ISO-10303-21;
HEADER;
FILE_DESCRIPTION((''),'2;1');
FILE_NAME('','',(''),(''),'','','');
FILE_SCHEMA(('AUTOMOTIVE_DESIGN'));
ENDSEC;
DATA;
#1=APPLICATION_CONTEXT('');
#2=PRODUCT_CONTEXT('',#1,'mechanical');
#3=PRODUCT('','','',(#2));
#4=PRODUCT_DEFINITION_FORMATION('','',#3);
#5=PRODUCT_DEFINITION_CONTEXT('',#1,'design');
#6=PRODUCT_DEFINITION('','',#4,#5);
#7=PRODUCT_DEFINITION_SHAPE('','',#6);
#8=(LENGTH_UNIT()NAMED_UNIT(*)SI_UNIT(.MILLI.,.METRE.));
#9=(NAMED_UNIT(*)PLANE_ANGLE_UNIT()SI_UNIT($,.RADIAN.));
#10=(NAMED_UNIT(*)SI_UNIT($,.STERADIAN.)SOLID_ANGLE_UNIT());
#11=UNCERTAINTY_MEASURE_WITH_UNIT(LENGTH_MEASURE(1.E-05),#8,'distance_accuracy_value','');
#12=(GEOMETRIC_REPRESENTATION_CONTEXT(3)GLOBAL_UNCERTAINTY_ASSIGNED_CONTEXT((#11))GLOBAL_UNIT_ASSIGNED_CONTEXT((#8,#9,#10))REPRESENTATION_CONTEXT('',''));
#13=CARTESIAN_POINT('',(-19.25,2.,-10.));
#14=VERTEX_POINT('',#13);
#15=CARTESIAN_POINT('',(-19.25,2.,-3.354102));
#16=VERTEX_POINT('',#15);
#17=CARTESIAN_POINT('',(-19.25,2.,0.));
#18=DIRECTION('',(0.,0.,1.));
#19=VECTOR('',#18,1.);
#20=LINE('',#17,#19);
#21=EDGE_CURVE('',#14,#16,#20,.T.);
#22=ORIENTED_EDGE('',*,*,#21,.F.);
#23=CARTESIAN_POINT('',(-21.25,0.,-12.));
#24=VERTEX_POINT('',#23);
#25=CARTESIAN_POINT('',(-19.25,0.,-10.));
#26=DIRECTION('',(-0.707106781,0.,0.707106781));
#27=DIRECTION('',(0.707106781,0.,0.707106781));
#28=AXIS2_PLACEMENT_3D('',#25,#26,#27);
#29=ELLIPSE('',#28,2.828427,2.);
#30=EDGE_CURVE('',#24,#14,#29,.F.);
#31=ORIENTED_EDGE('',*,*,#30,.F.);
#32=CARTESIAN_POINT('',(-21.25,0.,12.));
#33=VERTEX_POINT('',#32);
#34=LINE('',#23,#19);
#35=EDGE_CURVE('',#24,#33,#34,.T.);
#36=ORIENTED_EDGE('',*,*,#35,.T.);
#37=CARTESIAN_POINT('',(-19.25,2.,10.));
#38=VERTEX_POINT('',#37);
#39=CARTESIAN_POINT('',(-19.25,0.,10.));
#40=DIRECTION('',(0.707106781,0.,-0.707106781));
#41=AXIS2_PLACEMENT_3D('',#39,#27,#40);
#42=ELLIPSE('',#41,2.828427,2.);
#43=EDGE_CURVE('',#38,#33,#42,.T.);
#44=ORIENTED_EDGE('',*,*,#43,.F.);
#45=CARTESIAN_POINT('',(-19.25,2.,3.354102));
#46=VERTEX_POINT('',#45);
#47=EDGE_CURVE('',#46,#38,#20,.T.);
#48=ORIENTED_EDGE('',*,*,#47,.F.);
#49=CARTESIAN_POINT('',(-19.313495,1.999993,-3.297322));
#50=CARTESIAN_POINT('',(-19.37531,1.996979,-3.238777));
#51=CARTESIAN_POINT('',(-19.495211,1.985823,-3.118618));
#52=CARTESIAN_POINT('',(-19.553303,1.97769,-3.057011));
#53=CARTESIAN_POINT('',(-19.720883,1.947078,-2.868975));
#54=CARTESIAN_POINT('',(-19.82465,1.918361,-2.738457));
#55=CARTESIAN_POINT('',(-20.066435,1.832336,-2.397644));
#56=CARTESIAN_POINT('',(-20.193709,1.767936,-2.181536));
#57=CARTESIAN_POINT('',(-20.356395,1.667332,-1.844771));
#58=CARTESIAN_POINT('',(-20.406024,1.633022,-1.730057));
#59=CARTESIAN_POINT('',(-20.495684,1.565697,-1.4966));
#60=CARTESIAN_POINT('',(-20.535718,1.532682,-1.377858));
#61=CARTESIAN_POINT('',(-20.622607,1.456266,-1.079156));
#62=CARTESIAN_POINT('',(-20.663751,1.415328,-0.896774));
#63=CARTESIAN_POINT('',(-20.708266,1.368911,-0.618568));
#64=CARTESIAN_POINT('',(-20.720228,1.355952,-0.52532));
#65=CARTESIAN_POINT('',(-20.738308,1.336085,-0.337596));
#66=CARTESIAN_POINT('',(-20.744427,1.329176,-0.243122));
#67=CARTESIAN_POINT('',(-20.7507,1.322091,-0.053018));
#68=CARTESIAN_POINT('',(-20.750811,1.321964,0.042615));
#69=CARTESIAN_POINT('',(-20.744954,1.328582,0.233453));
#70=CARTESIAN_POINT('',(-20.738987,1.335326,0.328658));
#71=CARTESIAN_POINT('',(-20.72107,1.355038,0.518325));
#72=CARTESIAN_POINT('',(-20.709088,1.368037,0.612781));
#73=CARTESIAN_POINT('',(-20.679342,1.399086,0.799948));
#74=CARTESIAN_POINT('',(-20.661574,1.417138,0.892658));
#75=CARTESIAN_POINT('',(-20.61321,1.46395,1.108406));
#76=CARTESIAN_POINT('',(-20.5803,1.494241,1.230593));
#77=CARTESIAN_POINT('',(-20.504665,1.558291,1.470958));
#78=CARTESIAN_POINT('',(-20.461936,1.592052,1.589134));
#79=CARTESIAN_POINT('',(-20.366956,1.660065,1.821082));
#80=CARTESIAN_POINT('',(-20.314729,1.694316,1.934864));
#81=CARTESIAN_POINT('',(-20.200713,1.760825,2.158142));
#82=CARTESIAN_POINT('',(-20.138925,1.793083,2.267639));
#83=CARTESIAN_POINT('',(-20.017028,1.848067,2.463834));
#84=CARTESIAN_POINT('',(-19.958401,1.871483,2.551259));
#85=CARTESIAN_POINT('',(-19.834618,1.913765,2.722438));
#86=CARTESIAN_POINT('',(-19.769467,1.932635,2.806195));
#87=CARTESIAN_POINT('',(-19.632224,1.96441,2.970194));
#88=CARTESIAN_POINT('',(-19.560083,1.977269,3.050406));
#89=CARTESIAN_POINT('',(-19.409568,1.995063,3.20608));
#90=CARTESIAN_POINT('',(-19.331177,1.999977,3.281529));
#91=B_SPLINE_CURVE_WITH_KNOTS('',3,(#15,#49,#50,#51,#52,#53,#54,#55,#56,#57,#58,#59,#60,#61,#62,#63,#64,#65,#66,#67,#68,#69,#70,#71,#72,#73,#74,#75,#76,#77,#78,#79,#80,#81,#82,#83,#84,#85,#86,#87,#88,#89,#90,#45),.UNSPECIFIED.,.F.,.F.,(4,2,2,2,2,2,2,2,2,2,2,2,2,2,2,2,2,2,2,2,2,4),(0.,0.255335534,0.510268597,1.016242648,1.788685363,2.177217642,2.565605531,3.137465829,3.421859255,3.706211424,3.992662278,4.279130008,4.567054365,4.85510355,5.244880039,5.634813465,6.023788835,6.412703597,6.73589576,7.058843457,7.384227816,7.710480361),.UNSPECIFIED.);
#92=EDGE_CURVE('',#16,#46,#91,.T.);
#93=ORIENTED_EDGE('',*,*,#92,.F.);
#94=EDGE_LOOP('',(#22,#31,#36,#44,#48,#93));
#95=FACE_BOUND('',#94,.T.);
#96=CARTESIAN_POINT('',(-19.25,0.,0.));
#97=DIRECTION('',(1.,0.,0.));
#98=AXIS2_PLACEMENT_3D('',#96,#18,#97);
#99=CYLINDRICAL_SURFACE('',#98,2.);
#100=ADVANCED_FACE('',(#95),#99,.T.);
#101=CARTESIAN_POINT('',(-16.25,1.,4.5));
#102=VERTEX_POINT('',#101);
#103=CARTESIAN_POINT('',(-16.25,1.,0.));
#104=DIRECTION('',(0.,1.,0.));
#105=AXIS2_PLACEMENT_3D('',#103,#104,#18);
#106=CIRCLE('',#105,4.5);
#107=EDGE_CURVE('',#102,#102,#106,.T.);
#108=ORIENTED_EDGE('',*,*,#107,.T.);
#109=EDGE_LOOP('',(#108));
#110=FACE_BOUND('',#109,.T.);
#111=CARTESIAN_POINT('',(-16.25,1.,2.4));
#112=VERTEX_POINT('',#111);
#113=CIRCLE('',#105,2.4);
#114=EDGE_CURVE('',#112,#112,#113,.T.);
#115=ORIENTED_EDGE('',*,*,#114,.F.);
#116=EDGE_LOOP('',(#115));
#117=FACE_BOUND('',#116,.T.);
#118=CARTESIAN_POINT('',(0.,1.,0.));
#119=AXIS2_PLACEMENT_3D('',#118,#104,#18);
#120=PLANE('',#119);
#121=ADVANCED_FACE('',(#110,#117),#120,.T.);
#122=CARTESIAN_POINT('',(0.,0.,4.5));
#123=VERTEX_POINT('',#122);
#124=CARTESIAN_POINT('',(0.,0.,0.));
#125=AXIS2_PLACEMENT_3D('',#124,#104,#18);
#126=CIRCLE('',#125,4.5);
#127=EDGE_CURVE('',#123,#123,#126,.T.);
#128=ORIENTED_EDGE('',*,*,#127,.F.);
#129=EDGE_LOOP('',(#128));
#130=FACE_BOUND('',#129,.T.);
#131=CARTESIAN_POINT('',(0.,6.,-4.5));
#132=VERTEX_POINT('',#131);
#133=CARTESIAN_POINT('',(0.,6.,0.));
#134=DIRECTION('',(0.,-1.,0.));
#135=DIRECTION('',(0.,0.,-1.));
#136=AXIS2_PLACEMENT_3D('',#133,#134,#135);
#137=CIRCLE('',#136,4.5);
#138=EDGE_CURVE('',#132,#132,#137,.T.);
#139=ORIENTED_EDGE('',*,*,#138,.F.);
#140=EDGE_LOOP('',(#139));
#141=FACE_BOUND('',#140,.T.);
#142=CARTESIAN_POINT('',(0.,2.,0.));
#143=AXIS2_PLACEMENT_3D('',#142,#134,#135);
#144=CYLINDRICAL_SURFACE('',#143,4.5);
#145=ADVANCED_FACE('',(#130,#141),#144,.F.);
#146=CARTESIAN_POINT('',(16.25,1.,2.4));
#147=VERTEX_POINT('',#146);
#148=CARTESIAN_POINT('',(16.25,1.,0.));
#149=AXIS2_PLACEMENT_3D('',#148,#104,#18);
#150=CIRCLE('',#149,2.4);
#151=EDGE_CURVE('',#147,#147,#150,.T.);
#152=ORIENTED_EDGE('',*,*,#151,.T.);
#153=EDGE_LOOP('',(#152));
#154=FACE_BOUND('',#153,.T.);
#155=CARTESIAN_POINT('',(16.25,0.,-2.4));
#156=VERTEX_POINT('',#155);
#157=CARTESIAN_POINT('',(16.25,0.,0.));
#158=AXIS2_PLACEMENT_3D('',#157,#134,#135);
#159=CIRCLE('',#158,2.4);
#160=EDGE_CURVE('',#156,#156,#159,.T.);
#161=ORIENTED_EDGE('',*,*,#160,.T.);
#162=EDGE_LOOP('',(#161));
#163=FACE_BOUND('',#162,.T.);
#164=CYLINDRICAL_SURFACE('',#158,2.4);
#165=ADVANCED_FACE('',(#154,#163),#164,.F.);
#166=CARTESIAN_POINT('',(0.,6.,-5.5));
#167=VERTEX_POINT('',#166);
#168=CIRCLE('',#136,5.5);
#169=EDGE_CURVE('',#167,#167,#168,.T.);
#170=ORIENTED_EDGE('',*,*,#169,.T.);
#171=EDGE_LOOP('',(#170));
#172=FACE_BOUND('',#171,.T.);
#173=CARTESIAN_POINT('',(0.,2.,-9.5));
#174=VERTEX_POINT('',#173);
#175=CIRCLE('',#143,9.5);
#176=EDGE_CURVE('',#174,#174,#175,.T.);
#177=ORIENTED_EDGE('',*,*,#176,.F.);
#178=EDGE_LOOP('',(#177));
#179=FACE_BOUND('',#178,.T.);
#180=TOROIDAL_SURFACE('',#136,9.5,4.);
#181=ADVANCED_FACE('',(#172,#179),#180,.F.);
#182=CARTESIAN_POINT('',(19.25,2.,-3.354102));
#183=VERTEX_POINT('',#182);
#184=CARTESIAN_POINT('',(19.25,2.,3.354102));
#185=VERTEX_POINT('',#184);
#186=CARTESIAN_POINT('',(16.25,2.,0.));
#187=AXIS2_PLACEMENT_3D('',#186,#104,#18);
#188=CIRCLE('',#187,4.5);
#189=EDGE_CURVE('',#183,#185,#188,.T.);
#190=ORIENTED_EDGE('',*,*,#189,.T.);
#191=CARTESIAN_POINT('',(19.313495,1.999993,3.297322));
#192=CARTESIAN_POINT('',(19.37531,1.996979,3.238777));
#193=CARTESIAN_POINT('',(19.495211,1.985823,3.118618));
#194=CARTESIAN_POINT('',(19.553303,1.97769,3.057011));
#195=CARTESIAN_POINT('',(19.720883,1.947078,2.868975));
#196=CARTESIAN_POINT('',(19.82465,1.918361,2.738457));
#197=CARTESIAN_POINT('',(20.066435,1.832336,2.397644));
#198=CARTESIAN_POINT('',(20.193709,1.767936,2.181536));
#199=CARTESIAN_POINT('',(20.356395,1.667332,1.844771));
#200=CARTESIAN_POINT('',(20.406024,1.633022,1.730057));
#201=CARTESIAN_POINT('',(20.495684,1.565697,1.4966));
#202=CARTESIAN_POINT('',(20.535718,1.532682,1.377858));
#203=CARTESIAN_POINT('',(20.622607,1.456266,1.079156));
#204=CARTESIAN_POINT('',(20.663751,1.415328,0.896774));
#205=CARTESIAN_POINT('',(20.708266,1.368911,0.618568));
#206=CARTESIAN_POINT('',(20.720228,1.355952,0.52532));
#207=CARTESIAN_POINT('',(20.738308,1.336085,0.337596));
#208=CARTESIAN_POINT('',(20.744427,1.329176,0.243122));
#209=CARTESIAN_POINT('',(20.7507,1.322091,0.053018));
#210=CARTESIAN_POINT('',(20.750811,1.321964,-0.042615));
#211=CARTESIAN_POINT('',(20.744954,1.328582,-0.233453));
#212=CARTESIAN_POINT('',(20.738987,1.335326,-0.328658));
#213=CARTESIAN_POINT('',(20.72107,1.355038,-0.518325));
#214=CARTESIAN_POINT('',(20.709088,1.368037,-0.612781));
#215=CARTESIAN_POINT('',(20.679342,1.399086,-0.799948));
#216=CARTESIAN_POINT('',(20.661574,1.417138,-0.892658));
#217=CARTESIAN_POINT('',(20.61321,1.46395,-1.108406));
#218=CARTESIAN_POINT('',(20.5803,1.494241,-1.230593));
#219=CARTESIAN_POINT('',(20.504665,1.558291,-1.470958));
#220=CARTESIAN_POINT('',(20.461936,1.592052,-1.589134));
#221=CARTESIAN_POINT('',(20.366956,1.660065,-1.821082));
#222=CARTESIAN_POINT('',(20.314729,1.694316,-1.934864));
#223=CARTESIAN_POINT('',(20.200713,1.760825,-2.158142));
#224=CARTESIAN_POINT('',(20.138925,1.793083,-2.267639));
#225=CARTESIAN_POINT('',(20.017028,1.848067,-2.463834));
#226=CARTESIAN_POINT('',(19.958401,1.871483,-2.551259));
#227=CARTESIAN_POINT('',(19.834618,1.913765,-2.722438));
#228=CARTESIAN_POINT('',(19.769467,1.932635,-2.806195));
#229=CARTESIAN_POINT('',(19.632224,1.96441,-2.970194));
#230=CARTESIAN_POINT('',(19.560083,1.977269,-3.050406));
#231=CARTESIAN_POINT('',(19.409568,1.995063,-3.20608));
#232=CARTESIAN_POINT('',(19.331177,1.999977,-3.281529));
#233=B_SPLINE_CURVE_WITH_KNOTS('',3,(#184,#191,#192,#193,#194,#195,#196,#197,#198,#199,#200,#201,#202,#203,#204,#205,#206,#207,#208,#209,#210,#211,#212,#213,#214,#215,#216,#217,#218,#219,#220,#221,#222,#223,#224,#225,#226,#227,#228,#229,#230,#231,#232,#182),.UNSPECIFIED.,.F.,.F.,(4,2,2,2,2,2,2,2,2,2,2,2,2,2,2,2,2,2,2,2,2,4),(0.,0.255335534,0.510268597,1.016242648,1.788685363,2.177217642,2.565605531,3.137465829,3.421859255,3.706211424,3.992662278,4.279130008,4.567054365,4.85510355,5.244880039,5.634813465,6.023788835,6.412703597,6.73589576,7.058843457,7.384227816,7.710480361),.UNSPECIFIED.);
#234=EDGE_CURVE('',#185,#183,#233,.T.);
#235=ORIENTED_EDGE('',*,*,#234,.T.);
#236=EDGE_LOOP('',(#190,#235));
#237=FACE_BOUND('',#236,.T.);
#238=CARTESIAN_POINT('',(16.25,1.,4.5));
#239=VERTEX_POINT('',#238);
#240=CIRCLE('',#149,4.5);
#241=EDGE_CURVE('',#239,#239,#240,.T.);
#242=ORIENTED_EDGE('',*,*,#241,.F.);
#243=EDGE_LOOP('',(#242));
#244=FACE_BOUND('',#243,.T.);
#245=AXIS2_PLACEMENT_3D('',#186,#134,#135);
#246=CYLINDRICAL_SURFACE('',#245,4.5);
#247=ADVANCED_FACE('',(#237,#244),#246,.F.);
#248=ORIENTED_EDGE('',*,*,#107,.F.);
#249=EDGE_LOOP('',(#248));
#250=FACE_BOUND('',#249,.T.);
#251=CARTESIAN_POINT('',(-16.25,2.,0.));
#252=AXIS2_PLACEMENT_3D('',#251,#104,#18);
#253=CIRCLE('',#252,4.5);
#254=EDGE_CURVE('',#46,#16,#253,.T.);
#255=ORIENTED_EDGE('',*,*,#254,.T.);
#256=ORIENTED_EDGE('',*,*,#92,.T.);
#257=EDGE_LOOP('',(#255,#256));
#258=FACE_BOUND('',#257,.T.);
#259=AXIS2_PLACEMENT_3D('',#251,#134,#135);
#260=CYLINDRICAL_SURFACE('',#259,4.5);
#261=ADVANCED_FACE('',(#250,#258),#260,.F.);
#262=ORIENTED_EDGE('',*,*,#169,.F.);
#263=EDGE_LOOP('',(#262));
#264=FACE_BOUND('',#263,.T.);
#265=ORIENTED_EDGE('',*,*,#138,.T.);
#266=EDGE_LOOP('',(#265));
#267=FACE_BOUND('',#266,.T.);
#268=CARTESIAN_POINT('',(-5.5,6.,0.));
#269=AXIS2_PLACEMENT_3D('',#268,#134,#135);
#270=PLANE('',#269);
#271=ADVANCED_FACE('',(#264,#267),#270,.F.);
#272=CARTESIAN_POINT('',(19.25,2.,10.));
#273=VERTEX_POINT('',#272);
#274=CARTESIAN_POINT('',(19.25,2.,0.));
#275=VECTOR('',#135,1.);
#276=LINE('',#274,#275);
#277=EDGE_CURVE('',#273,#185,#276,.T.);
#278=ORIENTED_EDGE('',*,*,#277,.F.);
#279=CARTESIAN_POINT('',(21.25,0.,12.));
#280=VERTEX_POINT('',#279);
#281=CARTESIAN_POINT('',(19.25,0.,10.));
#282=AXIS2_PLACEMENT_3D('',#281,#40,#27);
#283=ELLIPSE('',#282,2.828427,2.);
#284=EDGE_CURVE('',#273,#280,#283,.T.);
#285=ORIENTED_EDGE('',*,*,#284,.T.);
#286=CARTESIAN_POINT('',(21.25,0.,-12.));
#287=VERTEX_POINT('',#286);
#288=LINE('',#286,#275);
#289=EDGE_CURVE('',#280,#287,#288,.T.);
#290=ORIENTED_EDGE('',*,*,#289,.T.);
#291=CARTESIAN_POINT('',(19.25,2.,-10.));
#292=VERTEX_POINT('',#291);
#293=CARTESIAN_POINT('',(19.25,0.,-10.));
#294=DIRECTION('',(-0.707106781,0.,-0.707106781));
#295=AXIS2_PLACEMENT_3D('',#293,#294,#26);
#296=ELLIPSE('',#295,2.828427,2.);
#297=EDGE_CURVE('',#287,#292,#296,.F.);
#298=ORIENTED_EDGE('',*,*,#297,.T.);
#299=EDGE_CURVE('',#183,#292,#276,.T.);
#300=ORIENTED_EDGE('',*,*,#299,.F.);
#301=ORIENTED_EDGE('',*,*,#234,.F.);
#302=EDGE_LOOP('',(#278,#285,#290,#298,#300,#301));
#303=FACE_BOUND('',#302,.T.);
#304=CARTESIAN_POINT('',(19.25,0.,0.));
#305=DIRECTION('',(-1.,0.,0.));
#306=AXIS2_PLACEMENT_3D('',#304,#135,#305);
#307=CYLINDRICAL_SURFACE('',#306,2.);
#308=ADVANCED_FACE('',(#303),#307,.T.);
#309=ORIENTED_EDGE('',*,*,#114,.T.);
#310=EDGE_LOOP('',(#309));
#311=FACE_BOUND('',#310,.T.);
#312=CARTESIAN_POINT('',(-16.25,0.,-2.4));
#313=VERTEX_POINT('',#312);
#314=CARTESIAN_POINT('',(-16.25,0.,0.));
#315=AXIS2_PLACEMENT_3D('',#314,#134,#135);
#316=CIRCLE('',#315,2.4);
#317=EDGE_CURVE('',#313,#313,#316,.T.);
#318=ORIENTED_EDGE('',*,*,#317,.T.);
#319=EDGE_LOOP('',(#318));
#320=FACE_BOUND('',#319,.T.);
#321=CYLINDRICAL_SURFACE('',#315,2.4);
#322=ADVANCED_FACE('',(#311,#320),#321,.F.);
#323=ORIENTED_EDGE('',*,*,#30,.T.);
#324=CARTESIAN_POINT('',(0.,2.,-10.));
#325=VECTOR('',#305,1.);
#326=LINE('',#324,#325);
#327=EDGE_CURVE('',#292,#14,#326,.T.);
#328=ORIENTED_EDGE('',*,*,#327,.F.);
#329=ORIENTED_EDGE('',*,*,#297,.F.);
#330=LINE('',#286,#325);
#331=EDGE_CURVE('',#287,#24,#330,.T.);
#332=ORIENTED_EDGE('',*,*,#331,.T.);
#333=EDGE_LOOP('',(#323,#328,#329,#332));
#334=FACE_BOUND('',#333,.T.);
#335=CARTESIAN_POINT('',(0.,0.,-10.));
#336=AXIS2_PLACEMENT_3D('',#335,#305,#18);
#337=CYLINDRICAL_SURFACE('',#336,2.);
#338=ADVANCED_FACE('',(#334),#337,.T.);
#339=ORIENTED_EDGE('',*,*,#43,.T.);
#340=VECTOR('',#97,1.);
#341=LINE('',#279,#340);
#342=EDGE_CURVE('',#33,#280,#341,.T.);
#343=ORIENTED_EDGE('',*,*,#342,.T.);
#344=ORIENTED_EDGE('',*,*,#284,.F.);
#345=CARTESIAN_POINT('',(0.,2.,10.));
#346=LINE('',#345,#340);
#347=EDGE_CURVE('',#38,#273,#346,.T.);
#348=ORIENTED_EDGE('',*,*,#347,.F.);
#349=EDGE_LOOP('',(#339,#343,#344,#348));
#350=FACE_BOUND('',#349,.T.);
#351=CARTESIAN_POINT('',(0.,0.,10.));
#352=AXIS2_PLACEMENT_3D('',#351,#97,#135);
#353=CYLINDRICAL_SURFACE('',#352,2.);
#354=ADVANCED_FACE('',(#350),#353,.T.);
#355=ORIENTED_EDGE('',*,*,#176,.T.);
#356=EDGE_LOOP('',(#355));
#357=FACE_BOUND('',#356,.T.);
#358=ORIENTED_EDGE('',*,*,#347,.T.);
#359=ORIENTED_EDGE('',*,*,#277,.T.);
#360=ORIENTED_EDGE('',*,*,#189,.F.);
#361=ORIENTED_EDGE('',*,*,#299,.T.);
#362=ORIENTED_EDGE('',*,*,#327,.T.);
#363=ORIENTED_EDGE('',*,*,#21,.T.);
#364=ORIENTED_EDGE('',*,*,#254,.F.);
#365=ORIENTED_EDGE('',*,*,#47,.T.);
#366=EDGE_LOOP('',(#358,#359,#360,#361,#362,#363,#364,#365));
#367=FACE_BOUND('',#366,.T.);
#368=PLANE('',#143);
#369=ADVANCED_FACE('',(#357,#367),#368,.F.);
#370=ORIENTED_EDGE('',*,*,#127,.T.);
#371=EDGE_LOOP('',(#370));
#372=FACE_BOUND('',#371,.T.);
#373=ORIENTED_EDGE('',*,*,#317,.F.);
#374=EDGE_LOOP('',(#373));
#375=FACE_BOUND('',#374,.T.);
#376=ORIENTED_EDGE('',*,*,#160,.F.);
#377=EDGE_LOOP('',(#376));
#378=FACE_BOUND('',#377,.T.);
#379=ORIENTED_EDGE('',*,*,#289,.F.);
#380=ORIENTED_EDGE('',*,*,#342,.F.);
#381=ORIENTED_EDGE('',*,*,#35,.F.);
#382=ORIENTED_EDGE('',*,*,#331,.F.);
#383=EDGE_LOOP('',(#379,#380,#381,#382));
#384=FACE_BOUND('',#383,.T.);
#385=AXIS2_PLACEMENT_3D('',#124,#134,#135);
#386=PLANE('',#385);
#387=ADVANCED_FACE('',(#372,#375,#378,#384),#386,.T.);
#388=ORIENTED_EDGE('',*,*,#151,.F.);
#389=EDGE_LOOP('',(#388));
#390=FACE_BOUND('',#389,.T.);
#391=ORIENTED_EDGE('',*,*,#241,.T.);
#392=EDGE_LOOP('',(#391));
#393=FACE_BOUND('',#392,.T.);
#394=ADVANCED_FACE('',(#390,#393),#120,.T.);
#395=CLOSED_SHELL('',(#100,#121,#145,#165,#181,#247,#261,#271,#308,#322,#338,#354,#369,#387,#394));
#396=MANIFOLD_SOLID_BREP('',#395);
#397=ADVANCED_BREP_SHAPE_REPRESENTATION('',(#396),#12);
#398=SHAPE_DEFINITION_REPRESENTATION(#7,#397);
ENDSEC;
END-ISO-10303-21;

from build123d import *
from build123d.topology import SkipClean

# Parameters (mm, degrees)
SKETCH1_W            = 42.5
SKETCH1_H            = 24
SKETCH1_R            = 4.5
BOSS_EXTRUDE1_DEPTH  = 2
SKETCH1_2_R          = 4.5
BOSS_EXTRUDE2_DEPTH  = 1
SKETCH2_W            = 1
SKETCH2_H            = 4
FILLET3_START        = -12
FILLET3_DEPTH        = 24
FILLET3_START_2      = -22
FILLET3_2_DEPTH      = 44
FILLET2_R            = 4
M4_CLEARANCE_HOLE1_D = 4.8


with BuildPart() as part:
    # Sketch1 → Boss-Extrude1 (new body)
    with BuildSketch(Plane(origin=(0, 0, 0), x_dir=(1, 0, 0), z_dir=(0, 1, 0))):
        Rectangle(SKETCH1_W, SKETCH1_H)
        with Locations(Location((0, 0, 0), (0, 0, 270))):
            Circle(SKETCH1_R, mode=Mode.SUBTRACT)
        with Locations(Location((16.25, 0, 0), (0, 0, 270))):
            Circle(SKETCH1_R, mode=Mode.SUBTRACT)
        with Locations(Location((-16.25, 0, 0), (0, 0, 270))):
            Circle(SKETCH1_R, mode=Mode.SUBTRACT)
    extrude(amount=BOSS_EXTRUDE1_DEPTH)

    # Sketch1<2> → Boss-Extrude2 (add)
    with BuildSketch(Plane(origin=(0, 0, 0), x_dir=(1, 0, 0), z_dir=(0, 1, 0))):
        with Locations(Location((16.25, 0, 0), (0, 0, 270))):
            Circle(SKETCH1_2_R)
        with Locations(Location((-16.25, 0, 0), (0, 0, 270))):
            Circle(SKETCH1_2_R)
    extrude(amount=BOSS_EXTRUDE2_DEPTH)

    # Sketch2 → Revolve1 (revolve)
    with SkipClean():  # the faces are left unmerged after this step: merging them gives an invalid solid
        with BuildSketch(Plane.XY, mode=Mode.PRIVATE) as revolve1_sk:
            with Locations((-5, 4)):
                Rectangle(SKETCH2_W, SKETCH2_H)
        revolve(revolve1_sk.sketch.rotate(Axis((0, 0, 0), (0, 1, 0)), 270), axis=Axis((0, 0, 0), (0, 1, 0)))
    add(part.part.scale(1), mode=Mode.REPLACE)  # the faces are merged on a copy

    # Fillet3: read off the stored shape, not the designer's step
    # Fillet3 outline → Fillet3 (cut)
    with BuildSketch(Plane.XY.offset(FILLET3_START)):
        with BuildLine():
            Line((21.25, 2), (19.25, 2))
            ThreePointArc((19.25, 2), (20.664213562, 1.414213562), (21.25, 0))
            Line((21.25, 0), (21.25, 2))
        make_face()
        with BuildLine():
            ThreePointArc((-21.25, 0), (-20.664213562, 1.414213562), (-19.25, 2))
            Line((-19.25, 2), (-21.25, 2))
            Line((-21.25, 2), (-21.25, 0))
        make_face()
    extrude(amount=FILLET3_DEPTH, mode=Mode.SUBTRACT)

    # Fillet3 2 outline → Fillet3 2 (cut)
    with BuildSketch(Plane.YZ.offset(FILLET3_START_2)):
        with BuildLine():
            Line((2, -12), (2, -10))
            ThreePointArc((2, -10), (1.414213562, -11.414213562), (0, -12))
            Line((0, -12), (2, -12))
        make_face()
        with BuildLine():
            ThreePointArc((0, 12), (1.414213562, 11.414213562), (2, 10))
            Line((2, 10), (2, 12))
            Line((2, 12), (0, 12))
        make_face()
    extrude(amount=FILLET3_2_DEPTH, mode=Mode.SUBTRACT)

    # Fillet2
    fillet2_edges = [part.edges().sort_by_distance(p)[0] for p in [
        (0, 2, 5.5),
    ]]
    fillet(fillet2_edges, radius=FILLET2_R - 0.0001)  # a hair under: the kernel refuses the full size

    # M4 Clearance Hole1 (through all)
    with Locations(Plane(origin=(0, 0, 0), x_dir=(-1, 0, 0), z_dir=(0, -1, 0))):
        with Locations((-16.25, 0), (16.25, 0)):
            Hole(M4_CLEARANCE_HOLE1_D / 2)


solid = part.part
